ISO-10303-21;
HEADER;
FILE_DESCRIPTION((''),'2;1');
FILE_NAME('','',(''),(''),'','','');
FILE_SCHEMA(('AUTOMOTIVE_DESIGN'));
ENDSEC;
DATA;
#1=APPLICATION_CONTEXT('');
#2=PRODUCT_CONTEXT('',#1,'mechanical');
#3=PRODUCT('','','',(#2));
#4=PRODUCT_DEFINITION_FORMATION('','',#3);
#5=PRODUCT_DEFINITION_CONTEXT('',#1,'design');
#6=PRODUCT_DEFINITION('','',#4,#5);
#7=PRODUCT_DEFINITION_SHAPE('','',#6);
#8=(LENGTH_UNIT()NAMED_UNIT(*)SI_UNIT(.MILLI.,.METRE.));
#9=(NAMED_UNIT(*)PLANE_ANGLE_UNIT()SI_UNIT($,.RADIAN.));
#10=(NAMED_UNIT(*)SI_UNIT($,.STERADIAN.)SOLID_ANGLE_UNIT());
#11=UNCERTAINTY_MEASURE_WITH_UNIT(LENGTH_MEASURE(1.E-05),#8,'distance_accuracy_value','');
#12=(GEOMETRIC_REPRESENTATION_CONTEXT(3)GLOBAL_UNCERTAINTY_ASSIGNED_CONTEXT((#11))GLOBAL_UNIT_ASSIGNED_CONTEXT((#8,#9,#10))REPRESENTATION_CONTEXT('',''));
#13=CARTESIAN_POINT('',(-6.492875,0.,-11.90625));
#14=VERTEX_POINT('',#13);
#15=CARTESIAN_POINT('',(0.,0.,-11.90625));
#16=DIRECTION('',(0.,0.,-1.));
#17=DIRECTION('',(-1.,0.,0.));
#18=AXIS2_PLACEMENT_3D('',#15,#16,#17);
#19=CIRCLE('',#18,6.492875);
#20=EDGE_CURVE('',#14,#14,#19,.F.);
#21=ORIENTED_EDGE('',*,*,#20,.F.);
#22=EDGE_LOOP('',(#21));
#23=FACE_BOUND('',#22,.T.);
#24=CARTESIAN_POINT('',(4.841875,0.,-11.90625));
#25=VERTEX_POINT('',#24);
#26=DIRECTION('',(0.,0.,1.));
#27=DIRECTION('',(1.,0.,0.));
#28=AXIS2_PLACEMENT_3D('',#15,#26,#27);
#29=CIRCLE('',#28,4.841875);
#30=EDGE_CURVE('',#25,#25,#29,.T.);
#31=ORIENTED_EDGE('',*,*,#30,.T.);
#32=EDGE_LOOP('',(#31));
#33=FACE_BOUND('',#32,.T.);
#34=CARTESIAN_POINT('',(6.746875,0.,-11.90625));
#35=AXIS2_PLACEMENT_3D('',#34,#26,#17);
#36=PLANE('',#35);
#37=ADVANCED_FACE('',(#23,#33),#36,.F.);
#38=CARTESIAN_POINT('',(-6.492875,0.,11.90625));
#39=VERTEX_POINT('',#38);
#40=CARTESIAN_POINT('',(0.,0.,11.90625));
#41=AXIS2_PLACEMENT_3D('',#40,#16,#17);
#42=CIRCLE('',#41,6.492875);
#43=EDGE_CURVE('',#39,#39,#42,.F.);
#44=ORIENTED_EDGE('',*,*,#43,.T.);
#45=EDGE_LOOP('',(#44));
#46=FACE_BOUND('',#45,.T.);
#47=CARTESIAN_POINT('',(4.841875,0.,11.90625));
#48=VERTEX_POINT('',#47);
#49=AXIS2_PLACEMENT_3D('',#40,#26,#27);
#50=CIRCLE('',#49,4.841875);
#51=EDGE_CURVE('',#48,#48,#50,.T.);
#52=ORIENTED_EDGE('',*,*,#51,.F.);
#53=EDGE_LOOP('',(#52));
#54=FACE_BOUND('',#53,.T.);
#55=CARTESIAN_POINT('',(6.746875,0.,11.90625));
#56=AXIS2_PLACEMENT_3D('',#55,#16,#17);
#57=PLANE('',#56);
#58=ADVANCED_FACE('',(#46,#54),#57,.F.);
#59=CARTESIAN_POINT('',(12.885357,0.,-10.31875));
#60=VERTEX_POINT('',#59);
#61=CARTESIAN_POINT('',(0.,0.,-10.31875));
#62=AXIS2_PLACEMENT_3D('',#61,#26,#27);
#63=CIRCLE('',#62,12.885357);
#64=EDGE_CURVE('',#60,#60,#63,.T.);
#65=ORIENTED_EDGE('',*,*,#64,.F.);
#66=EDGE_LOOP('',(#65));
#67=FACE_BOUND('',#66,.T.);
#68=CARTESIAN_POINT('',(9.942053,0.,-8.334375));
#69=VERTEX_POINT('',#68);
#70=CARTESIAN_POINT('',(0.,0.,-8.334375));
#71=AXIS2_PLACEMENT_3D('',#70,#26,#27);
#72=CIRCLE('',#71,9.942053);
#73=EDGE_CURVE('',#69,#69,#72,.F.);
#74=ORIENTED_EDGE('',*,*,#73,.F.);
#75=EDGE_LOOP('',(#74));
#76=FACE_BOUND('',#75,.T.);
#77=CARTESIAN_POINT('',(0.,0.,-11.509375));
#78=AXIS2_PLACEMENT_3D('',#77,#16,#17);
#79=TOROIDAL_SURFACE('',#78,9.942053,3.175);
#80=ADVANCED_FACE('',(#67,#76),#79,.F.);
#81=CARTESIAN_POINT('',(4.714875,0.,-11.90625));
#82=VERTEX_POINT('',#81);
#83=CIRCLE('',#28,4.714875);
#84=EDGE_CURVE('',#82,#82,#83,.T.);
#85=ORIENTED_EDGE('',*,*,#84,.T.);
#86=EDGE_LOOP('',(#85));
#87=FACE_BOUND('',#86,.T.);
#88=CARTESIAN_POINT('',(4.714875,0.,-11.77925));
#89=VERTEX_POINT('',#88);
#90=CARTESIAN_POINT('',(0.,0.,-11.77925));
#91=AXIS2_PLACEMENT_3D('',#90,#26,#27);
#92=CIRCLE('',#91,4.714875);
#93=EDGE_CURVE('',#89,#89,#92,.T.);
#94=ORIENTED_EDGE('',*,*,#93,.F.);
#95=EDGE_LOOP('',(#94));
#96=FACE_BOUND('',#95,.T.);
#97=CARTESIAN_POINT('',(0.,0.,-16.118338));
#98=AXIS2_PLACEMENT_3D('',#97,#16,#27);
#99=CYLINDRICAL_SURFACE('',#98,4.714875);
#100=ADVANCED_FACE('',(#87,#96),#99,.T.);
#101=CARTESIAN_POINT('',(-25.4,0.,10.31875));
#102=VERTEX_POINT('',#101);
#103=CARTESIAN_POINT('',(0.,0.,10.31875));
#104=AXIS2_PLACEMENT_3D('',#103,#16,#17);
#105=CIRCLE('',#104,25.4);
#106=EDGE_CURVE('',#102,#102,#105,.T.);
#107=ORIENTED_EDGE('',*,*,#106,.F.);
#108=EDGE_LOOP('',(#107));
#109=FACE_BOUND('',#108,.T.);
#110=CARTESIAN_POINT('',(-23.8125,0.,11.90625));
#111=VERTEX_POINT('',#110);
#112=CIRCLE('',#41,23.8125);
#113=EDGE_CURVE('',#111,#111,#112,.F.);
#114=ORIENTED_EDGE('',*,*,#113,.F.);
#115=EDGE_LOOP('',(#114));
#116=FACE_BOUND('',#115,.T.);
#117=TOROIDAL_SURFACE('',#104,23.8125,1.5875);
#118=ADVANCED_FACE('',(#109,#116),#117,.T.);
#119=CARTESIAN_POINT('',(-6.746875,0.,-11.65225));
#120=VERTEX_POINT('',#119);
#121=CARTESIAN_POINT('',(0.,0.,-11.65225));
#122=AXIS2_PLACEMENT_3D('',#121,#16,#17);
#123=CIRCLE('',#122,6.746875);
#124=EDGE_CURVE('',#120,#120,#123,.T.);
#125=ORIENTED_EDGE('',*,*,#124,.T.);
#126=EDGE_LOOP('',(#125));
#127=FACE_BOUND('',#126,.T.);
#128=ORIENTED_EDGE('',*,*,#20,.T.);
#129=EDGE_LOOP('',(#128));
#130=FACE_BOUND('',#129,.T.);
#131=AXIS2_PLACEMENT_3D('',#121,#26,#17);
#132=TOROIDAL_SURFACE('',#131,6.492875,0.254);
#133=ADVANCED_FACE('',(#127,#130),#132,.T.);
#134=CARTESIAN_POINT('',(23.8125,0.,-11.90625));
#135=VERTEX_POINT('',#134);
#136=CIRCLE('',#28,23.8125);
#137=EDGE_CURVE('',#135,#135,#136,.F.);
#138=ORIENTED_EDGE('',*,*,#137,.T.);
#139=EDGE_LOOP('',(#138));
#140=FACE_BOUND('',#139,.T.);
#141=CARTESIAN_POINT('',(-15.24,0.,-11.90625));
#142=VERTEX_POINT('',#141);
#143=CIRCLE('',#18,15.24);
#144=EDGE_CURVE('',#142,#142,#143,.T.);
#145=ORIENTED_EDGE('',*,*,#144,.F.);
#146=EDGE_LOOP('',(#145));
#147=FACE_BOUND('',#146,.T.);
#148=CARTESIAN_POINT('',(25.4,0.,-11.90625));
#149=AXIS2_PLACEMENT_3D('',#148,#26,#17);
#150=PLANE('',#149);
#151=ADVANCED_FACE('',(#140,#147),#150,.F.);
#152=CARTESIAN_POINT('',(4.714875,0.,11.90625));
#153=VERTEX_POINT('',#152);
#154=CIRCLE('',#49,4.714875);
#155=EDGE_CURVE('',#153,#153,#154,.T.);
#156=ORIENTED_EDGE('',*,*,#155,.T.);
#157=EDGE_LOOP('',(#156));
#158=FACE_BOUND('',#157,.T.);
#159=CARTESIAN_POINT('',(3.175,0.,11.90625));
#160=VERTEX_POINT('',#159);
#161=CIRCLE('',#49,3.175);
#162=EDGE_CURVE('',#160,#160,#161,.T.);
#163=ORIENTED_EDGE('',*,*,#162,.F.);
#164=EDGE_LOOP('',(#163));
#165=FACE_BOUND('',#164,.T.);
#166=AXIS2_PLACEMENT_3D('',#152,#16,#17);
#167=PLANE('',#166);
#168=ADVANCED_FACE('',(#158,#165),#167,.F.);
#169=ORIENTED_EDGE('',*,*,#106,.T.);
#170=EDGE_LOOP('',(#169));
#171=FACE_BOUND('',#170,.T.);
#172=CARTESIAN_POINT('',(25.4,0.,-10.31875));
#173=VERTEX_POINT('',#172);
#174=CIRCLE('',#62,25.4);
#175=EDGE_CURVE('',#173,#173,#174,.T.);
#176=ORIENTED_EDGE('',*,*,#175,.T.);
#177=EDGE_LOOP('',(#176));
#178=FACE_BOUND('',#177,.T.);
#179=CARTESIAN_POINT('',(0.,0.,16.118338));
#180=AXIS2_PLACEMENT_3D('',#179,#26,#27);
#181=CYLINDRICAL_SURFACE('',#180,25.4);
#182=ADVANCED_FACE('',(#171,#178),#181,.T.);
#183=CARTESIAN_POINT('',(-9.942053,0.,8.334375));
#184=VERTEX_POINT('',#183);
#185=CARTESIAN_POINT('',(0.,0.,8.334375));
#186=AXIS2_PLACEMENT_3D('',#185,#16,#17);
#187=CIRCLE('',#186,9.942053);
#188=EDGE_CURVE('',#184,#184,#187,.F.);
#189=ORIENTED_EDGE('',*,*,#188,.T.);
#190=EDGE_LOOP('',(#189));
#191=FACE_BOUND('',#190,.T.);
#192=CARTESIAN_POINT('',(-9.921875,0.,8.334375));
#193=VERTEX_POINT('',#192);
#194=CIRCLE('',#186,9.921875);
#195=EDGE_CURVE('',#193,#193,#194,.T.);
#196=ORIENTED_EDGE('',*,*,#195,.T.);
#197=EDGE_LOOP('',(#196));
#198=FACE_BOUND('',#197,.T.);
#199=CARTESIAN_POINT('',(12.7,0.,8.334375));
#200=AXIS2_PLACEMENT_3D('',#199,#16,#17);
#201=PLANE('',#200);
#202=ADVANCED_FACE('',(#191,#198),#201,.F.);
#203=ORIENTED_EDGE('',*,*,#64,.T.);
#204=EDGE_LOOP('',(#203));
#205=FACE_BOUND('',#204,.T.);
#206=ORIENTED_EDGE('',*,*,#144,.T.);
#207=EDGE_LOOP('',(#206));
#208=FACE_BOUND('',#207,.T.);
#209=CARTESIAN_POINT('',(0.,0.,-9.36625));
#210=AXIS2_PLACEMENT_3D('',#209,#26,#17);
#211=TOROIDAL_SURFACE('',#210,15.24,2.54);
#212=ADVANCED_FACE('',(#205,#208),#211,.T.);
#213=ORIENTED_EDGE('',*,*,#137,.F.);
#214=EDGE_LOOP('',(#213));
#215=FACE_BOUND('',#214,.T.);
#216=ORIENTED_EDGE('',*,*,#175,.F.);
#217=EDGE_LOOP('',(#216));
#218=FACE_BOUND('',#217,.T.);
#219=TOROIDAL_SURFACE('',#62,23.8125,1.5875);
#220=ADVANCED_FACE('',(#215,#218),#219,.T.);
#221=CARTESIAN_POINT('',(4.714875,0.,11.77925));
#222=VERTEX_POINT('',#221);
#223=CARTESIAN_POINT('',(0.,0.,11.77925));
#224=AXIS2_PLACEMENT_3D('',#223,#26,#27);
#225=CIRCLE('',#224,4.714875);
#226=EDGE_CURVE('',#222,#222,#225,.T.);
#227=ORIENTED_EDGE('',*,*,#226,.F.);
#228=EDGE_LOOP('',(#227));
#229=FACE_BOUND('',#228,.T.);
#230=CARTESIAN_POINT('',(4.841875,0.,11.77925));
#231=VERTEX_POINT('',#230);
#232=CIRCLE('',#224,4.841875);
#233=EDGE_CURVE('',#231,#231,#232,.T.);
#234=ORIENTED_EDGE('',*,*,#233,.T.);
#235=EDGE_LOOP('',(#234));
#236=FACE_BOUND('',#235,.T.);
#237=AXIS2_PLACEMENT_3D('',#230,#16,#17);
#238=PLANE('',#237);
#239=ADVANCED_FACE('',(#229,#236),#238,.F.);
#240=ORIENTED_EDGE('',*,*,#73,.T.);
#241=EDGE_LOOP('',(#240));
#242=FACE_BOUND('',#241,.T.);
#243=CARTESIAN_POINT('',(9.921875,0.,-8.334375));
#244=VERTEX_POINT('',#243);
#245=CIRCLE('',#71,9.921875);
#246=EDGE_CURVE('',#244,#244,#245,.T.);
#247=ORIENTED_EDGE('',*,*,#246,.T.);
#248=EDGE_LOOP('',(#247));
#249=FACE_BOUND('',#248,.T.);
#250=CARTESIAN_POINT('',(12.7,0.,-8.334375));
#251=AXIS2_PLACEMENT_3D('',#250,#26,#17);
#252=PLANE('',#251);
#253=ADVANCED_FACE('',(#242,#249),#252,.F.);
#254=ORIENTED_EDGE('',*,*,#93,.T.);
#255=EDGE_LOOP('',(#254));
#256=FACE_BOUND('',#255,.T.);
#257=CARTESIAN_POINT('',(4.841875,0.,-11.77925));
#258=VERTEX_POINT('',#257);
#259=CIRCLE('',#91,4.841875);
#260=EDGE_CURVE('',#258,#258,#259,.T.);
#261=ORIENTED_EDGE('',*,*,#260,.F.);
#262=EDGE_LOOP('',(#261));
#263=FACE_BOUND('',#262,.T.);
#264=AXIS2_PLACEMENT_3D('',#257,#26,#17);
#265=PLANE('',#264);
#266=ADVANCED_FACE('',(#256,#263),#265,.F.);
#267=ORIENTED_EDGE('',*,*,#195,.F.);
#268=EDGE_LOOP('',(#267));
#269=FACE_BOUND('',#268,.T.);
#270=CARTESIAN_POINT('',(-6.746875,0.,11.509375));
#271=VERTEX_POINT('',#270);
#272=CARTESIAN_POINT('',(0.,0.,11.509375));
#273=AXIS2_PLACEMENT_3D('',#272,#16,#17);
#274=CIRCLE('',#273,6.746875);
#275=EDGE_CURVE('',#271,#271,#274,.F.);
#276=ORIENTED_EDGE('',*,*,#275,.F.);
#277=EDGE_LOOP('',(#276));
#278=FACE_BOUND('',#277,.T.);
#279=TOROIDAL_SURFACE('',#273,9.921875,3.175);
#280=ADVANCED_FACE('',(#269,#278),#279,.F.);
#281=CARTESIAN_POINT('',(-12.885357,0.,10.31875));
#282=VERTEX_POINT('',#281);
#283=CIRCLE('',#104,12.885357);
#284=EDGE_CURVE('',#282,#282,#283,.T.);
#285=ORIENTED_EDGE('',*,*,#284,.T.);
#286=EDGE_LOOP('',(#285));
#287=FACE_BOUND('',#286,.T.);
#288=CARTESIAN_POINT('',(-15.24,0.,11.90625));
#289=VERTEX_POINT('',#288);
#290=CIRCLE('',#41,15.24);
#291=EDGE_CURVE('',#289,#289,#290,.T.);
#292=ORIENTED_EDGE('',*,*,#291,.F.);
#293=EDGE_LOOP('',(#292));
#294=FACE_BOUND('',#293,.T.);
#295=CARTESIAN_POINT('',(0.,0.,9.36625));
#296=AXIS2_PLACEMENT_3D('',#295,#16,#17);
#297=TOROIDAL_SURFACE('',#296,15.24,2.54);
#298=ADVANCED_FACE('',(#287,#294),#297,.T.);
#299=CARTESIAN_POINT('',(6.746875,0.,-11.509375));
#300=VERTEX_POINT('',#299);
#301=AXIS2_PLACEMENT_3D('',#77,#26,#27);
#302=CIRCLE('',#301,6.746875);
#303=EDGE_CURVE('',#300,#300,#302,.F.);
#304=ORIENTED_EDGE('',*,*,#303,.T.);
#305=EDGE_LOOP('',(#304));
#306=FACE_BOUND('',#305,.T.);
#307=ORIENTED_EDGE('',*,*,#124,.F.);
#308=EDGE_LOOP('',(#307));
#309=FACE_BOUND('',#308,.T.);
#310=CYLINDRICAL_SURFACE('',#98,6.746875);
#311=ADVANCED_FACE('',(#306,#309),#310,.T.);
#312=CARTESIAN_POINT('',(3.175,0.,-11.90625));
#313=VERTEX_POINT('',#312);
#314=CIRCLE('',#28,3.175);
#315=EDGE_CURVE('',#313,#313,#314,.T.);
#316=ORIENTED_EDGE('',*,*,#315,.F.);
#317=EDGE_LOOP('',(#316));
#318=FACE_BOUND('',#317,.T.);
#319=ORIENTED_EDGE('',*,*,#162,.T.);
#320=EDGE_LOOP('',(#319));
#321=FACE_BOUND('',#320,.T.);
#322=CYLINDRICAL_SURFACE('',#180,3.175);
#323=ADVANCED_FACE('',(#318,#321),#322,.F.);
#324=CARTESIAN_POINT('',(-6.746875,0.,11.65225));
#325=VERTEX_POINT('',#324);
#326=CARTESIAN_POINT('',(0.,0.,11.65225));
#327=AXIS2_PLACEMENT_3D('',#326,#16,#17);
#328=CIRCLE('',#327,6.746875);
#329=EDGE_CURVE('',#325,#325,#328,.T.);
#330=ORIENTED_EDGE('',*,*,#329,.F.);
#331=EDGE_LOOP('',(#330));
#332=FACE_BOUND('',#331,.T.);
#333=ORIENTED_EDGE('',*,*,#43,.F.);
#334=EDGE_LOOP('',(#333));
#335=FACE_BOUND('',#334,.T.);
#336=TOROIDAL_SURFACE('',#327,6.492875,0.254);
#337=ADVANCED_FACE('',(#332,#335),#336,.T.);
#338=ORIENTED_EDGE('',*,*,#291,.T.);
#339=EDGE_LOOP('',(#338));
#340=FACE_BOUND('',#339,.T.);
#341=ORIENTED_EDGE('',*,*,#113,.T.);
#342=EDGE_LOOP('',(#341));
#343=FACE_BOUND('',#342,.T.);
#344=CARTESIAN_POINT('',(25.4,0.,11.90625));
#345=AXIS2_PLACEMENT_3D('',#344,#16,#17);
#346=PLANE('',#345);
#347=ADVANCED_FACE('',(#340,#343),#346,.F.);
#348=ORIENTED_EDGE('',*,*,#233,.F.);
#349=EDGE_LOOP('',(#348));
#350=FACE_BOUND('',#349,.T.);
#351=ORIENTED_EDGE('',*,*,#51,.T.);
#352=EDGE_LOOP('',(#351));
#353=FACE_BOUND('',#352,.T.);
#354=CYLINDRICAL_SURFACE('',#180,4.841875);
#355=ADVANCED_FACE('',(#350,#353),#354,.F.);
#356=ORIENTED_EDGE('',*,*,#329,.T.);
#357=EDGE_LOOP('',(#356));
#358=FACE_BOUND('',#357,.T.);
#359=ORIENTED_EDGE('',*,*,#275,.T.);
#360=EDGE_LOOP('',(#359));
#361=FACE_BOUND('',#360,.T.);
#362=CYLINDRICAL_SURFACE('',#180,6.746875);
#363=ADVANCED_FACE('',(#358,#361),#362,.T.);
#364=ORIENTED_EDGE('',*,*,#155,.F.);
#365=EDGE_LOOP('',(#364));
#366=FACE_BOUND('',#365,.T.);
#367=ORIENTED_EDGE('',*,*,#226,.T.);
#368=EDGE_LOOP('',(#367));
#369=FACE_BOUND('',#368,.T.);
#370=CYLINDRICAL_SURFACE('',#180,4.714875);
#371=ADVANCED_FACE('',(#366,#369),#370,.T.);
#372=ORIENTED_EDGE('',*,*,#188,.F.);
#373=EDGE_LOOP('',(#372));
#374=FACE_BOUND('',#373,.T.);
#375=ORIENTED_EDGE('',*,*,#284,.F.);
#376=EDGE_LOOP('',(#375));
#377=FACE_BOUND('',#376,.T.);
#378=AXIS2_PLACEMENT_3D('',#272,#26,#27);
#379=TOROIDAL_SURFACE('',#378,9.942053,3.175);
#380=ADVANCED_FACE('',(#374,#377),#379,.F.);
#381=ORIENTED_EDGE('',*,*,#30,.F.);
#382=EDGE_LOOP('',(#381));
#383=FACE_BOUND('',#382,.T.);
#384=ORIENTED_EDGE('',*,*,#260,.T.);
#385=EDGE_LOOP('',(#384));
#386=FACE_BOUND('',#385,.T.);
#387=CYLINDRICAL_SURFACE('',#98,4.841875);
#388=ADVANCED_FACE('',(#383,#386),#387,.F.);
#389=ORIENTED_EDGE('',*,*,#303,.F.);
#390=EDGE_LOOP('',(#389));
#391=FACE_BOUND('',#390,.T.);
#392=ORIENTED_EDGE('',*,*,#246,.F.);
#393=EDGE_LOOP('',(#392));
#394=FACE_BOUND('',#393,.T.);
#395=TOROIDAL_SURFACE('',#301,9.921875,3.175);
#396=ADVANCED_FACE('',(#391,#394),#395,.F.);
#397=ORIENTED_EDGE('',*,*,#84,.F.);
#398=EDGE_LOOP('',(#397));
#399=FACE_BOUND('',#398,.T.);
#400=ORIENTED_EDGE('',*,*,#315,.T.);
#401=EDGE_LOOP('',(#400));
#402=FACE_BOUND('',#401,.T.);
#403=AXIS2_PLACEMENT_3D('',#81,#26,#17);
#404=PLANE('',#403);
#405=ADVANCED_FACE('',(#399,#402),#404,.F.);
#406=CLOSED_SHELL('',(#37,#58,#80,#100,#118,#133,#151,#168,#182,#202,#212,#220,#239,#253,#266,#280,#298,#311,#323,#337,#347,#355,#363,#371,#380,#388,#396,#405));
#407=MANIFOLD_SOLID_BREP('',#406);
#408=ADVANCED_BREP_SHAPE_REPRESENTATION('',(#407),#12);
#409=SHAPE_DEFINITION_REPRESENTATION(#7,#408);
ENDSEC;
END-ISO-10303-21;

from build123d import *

# Parameters (mm, degrees)
REVOLVE1_ANGLE    = 90
FILLET3_R         = 2.54
FILLET4_R         = 0.254
CIRPATTERN2_COUNT = 4
FILLET1_R         = 3.175
FILLET2_R         = 1.5875


with BuildPart() as part:
    # Sketch2 → Revolve1 (revolve)
    with BuildSketch(Plane(origin=(0, 0, 0), x_dir=(0, 0, -1), z_dir=(1, 0, 0))):
        Polygon((-11.90625, 3.175), (0, 3.175), (0, 25.4), (-11.90625, 25.4), (-11.90625, 12.7), (-8.334375, 12.7), (-8.334375, 6.746875), (-11.90625, 6.746875), (-11.90625, 4.841875), (-11.77925, 4.841875), (-11.77925, 4.714875), (-11.90625, 4.714875), align=None)
    revolve(axis=Axis((0, 0, 16.118337808), (0, 0, -1)), revolution_arc=REVOLVE1_ANGLE)

    # Fillet3
    fillet3_edges = [part.edges().sort_by_distance(p)[0] for p in [
        (8.980256121, 8.980256121, 11.90625),
    ]]
    fillet(fillet3_edges, radius=FILLET3_R)

    # Fillet4
    fillet4_edges = [part.edges().sort_by_distance(p)[0] for p in [
        (4.770761064, 4.770761064, 11.90625),
    ]]
    fillet(fillet4_edges, radius=FILLET4_R)

    # Mirror1: part across plane


with BuildPart() as part_1:
    add(part.part)
    add(part.part.mirror(Plane.XY))


with BuildPart() as cirpattern2_1:
    # CirPattern2: pattern copy
    add(part_1.part.rotate(Axis((0, 0, 16.118337808), (0, 0, 1)), 1 * 360 / CIRPATTERN2_COUNT))


with BuildPart() as cirpattern2_2:
    # CirPattern2: pattern copy
    add(part_1.part.rotate(Axis((0, 0, 16.118337808), (0, 0, 1)), 2 * 360 / CIRPATTERN2_COUNT))


with BuildPart() as cirpattern2_3:
    # CirPattern2: pattern copy
    add(part_1.part.rotate(Axis((0, 0, 16.118337808), (0, 0, 1)), 3 * 360 / CIRPATTERN2_COUNT))

    # Combine1: read off the stored shape, not the designer's step
    # Combine1: union CirPattern2_2, CirPattern2_1, part
    add(cirpattern2_2.part)
    add(cirpattern2_1.part)
    add(part_1.part)

    # Fillet1
    fillet1_edges = [cirpattern2_3.edges().sort_by_distance(p)[0] for p in [
        (-6.746875, 0, 8.334375),
        (-12.7, 0, 8.334375),
        (-12.7, 0, 9.36625),
        (-12.7, 0, -8.334375),
        (-6.746875, 0, -8.334375),
        (-12.7, 0, -9.36625),
    ]]
    fillet(fillet1_edges, radius=FILLET1_R)

    # Fillet2
    fillet2_edges = [cirpattern2_3.edges().sort_by_distance(p)[0] for p in [
        (-25.4, 0, 11.90625),
        (-25.4, 0, -11.90625),
    ]]
    fillet(fillet2_edges, radius=FILLET2_R)


solid = cirpattern2_3.part
